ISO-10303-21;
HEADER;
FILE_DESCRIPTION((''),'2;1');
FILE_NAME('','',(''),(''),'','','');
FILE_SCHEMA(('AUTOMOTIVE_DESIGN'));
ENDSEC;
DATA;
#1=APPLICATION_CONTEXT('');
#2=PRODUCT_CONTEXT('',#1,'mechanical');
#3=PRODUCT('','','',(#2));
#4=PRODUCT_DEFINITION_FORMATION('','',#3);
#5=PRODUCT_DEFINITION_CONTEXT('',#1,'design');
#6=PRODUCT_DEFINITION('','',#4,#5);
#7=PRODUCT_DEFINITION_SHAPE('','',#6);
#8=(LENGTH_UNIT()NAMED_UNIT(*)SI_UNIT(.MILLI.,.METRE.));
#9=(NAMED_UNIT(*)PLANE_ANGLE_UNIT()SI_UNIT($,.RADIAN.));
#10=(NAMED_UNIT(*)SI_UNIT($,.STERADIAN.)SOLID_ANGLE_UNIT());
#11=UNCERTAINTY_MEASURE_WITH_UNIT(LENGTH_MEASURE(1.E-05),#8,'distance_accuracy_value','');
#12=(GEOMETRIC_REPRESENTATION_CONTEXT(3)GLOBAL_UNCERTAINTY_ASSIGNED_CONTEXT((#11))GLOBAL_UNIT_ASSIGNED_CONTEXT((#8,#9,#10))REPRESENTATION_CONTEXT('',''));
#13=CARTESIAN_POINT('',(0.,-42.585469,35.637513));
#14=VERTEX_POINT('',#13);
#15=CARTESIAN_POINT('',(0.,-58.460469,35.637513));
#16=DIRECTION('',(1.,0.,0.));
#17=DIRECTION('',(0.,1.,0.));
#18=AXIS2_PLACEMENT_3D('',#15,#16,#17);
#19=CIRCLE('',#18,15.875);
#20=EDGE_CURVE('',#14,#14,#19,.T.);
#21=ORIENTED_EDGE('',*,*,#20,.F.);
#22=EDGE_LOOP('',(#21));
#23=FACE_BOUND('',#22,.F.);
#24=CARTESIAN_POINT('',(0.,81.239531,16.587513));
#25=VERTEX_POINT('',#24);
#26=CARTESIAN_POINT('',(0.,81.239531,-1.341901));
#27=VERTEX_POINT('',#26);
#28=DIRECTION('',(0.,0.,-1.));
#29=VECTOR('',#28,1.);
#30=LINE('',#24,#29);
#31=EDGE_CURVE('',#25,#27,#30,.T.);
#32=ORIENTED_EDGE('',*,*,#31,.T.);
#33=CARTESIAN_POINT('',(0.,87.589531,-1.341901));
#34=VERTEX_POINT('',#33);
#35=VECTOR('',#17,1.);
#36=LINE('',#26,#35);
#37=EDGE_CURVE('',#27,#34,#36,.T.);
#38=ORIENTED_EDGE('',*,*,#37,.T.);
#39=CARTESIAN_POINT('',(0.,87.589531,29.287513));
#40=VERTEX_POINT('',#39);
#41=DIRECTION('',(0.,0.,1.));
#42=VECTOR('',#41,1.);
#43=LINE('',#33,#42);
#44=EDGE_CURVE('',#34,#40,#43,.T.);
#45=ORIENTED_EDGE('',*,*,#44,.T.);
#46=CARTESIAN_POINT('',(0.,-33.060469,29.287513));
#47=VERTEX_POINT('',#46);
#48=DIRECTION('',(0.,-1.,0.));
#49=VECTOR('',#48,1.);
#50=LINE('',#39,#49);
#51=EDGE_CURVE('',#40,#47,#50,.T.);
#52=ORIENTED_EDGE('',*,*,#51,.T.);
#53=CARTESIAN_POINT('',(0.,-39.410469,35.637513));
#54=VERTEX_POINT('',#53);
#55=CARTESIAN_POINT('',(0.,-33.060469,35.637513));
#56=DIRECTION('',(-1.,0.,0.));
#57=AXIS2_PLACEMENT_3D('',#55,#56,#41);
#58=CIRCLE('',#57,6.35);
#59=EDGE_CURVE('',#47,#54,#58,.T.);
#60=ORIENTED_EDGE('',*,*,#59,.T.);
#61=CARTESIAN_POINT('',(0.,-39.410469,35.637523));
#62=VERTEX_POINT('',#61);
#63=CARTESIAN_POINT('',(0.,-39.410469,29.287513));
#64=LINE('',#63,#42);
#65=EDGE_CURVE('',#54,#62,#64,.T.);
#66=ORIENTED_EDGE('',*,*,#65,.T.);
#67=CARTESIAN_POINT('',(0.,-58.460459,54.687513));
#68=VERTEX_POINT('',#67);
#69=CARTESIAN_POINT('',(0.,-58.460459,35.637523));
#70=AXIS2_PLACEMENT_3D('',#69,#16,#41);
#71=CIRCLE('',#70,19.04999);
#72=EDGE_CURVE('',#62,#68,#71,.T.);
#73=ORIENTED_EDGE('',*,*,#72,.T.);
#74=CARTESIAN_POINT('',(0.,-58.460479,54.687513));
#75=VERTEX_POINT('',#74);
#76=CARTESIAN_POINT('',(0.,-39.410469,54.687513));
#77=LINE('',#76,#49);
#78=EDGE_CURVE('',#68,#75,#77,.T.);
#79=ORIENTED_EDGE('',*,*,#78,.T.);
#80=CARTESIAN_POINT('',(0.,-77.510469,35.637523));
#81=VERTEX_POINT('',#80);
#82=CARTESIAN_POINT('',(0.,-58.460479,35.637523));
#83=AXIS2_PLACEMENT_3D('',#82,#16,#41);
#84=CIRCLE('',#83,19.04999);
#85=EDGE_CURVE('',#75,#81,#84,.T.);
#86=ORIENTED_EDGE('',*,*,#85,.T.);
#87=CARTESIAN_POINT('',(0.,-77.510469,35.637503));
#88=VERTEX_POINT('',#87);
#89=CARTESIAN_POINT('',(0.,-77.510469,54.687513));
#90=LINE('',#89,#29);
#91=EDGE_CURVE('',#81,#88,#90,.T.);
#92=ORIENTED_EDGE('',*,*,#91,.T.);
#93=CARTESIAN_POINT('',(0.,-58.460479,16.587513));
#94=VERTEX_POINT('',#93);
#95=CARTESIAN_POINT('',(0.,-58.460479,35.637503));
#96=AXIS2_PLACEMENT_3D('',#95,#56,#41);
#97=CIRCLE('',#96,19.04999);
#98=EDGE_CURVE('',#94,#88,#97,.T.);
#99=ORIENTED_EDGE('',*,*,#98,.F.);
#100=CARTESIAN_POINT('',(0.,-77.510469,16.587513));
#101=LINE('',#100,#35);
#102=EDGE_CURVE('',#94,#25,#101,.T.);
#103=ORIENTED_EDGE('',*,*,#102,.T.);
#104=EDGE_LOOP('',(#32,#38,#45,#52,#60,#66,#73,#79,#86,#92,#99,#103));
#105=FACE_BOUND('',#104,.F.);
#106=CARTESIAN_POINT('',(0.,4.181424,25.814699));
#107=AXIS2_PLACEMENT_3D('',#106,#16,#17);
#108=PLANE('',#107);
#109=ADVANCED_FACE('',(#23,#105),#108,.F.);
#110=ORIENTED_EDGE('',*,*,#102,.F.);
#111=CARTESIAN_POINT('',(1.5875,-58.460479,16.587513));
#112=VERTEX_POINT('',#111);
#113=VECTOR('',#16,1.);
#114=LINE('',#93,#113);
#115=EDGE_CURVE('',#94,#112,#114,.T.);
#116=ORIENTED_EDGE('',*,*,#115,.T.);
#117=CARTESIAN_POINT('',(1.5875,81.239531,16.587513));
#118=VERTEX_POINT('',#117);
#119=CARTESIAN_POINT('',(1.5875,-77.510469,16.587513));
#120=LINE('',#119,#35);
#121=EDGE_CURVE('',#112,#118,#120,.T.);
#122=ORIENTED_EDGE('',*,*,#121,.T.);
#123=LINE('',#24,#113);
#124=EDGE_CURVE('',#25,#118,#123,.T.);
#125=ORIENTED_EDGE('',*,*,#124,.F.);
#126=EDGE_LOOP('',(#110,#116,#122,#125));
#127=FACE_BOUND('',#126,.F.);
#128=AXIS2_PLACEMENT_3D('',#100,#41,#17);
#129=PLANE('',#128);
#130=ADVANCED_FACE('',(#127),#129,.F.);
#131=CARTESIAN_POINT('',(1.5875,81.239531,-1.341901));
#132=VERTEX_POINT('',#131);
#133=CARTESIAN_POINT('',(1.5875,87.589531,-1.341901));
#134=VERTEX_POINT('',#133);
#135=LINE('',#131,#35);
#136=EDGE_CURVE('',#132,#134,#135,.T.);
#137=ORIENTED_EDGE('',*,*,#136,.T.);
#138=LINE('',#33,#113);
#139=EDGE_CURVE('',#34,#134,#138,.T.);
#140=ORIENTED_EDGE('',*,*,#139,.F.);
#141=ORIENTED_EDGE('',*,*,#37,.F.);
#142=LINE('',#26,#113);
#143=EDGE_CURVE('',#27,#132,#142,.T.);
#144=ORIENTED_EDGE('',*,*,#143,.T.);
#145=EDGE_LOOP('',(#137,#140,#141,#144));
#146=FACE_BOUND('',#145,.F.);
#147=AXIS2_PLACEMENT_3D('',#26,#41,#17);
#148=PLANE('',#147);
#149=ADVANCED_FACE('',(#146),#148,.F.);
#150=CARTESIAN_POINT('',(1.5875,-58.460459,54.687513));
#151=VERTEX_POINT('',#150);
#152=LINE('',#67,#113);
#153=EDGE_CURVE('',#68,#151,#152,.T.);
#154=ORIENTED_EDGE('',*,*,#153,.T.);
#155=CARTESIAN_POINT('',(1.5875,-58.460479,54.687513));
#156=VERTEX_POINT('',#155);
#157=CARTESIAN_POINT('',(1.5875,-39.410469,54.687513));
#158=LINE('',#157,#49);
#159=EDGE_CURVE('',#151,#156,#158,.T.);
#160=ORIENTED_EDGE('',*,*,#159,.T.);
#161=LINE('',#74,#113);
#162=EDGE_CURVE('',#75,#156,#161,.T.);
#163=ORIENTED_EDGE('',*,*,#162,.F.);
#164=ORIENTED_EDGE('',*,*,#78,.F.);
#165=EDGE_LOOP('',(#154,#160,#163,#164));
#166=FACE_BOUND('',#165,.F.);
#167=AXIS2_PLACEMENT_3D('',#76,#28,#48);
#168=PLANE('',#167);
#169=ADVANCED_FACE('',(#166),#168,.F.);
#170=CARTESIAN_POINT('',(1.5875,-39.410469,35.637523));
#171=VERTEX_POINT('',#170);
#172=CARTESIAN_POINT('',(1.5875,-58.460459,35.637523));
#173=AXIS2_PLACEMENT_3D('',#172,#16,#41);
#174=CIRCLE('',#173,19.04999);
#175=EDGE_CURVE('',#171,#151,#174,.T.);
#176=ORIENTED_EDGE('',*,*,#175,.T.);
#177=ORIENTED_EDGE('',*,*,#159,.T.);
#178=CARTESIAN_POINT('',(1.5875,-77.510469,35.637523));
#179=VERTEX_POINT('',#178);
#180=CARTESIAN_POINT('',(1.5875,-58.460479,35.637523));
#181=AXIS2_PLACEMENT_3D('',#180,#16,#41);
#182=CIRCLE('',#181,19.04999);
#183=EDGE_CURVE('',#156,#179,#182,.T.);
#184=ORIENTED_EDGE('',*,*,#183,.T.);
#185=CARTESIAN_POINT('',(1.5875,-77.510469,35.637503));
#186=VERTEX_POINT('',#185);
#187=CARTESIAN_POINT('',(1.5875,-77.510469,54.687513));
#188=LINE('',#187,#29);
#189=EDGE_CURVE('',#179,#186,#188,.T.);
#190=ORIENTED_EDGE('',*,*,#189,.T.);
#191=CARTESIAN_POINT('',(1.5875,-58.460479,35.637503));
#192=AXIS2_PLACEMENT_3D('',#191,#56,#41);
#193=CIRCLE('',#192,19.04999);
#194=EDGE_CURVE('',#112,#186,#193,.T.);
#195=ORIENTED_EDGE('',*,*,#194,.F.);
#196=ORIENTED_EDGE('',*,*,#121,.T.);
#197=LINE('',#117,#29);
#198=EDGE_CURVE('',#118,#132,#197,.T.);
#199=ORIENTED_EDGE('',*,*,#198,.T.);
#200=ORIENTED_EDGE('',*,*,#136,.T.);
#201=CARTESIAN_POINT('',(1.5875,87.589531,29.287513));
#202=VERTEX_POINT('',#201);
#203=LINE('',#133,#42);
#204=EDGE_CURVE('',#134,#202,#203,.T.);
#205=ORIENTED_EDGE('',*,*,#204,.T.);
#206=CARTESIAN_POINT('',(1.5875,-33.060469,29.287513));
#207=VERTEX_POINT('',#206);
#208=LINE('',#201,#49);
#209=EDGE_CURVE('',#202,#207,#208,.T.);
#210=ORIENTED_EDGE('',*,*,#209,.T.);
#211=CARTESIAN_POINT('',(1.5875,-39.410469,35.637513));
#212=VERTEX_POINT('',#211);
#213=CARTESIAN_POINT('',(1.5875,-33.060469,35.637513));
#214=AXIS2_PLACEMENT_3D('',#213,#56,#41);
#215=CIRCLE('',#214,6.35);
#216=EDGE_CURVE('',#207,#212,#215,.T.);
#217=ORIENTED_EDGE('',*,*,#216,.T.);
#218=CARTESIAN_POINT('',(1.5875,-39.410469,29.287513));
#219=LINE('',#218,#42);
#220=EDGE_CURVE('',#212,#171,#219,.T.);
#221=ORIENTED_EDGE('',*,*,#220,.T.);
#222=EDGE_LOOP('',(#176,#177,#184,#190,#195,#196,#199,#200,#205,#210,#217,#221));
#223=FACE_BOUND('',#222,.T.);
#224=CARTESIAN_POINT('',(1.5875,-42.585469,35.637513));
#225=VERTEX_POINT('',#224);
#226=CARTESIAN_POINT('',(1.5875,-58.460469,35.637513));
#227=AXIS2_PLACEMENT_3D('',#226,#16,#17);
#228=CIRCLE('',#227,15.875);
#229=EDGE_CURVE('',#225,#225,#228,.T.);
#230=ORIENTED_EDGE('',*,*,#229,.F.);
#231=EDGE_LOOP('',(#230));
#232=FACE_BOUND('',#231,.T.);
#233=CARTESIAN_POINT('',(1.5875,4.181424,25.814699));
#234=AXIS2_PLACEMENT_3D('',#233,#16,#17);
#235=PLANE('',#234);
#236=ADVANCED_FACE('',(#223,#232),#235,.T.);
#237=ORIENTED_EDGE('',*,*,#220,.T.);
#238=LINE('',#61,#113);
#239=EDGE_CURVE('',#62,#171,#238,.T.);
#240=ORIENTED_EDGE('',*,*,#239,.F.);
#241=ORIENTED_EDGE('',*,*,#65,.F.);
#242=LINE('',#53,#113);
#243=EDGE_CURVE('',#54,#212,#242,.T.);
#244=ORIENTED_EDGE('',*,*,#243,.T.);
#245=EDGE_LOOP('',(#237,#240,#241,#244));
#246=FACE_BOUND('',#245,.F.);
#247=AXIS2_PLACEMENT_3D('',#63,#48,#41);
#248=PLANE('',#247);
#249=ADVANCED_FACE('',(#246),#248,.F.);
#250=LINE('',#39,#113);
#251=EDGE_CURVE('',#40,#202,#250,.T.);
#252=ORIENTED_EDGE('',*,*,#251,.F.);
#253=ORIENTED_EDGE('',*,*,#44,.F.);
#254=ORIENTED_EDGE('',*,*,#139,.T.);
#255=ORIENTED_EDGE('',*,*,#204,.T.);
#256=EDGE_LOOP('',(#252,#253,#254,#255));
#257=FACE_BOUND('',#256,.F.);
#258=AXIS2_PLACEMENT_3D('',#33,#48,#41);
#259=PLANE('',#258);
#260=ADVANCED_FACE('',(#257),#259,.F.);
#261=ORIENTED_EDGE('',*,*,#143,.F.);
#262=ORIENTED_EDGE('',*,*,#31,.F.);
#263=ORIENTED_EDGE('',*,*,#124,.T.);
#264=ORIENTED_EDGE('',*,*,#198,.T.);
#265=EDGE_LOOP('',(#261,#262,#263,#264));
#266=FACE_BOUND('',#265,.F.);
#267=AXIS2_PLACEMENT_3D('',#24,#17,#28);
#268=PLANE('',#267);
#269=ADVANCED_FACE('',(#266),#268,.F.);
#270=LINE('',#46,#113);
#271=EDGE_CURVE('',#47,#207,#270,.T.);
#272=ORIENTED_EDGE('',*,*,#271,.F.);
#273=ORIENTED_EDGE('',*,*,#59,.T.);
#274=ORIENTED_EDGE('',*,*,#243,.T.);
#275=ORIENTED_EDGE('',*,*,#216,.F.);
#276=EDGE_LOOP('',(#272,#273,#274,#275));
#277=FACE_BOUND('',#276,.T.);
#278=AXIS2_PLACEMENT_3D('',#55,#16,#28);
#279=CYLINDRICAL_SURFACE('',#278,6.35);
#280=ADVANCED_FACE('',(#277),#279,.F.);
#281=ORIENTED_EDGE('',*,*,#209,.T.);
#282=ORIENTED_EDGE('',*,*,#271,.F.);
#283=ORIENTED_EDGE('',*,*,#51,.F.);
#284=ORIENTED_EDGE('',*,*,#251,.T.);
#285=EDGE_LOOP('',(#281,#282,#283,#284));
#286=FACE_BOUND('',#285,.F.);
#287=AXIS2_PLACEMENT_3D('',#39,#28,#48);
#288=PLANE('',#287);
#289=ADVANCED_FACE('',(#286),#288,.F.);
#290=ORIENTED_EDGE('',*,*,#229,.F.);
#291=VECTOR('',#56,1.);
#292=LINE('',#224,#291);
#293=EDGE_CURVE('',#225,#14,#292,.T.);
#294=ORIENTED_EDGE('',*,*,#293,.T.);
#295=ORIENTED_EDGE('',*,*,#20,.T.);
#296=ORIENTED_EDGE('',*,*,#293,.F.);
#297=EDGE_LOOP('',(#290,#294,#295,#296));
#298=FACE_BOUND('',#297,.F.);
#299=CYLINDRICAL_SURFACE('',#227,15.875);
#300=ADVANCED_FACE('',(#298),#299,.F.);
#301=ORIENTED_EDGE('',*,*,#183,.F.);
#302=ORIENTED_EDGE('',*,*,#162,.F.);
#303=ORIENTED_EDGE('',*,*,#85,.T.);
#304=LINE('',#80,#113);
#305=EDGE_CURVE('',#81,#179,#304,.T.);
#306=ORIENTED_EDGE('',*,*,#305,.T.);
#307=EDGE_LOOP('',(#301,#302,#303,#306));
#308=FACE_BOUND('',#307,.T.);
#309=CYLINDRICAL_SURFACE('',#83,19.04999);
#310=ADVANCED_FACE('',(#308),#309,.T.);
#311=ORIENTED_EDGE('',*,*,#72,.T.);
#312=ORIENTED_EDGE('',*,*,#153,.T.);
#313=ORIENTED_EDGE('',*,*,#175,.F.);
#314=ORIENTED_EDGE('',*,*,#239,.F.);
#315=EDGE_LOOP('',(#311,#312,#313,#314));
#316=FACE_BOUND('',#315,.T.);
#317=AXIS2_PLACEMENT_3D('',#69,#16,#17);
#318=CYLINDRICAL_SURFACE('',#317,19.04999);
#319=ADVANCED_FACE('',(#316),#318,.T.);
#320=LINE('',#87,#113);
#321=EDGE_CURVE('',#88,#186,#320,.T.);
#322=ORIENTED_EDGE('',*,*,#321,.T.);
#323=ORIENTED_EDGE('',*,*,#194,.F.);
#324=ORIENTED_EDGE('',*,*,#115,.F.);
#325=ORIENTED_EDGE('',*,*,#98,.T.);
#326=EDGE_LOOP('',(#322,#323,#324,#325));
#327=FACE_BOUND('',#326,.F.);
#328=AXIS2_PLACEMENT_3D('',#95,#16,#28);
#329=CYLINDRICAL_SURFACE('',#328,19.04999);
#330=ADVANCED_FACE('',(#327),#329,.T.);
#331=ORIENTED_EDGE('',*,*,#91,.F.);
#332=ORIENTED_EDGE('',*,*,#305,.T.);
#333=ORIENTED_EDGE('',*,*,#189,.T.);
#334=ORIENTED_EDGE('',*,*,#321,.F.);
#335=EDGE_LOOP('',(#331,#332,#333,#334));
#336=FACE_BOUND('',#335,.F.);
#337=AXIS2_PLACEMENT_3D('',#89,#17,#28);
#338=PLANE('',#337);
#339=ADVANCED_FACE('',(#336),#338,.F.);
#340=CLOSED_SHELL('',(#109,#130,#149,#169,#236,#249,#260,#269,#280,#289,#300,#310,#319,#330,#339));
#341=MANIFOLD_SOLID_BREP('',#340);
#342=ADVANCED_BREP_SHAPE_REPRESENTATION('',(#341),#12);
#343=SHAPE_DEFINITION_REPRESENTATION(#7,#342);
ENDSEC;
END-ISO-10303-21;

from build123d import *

# Parameters (mm, degrees)
F1_DEPTH = 1.5875
F2_R     = 19.04999
F3_R     = 6.35
F4_R     = 15.875
F5_DEPTH = 25.4


# Not quite as in the source:
# - a fillet or chamfer is up to 0.001 mm smaller than in the source, because OpenCascade refuses the exact size


with BuildPart() as f1:
    # F0 (on Right) → F1 (new body)
    with BuildSketch(Plane.YZ):
        Polygon((-77.51046875, 16.5875132085), (81.23953125, 16.5875132085), (81.23953125, -1.3419014323), (87.58953125, -1.3419014323), (87.58953125, 29.2875132085), (-39.41046875, 29.2875132085), (-39.41046875, 54.6875132085), (-77.51046875, 54.6875132085), align=None)
    extrude(amount=F1_DEPTH)

    # F2 (radius 19.05 in the source; OpenCascade refuses exactly that, so slightly less here)
    f2_edges = [f1.edges().sort_by_distance(p)[0] for p in [
        (0.79375, -77.510469, 54.687513),
        (0.79375, -77.510469, 16.587513),
        (0.79375, -39.410469, 54.687513),
    ]]
    fillet(f2_edges, radius=F2_R)

    # F3
    f3_edges = [f1.edges().sort_by_distance(p)[0] for p in [
        (0.79375, -39.410469, 29.287513),
    ]]
    fillet(f3_edges, radius=F3_R)

    # F4 (on face) → F5 (cut)
    with BuildSketch(Plane.YZ.offset(1.5875)):
        with Locations((-58.46046875, 35.6375132085)):
            Circle(F4_R)
    extrude(amount=-F5_DEPTH, mode=Mode.SUBTRACT)


solid = f1.part
